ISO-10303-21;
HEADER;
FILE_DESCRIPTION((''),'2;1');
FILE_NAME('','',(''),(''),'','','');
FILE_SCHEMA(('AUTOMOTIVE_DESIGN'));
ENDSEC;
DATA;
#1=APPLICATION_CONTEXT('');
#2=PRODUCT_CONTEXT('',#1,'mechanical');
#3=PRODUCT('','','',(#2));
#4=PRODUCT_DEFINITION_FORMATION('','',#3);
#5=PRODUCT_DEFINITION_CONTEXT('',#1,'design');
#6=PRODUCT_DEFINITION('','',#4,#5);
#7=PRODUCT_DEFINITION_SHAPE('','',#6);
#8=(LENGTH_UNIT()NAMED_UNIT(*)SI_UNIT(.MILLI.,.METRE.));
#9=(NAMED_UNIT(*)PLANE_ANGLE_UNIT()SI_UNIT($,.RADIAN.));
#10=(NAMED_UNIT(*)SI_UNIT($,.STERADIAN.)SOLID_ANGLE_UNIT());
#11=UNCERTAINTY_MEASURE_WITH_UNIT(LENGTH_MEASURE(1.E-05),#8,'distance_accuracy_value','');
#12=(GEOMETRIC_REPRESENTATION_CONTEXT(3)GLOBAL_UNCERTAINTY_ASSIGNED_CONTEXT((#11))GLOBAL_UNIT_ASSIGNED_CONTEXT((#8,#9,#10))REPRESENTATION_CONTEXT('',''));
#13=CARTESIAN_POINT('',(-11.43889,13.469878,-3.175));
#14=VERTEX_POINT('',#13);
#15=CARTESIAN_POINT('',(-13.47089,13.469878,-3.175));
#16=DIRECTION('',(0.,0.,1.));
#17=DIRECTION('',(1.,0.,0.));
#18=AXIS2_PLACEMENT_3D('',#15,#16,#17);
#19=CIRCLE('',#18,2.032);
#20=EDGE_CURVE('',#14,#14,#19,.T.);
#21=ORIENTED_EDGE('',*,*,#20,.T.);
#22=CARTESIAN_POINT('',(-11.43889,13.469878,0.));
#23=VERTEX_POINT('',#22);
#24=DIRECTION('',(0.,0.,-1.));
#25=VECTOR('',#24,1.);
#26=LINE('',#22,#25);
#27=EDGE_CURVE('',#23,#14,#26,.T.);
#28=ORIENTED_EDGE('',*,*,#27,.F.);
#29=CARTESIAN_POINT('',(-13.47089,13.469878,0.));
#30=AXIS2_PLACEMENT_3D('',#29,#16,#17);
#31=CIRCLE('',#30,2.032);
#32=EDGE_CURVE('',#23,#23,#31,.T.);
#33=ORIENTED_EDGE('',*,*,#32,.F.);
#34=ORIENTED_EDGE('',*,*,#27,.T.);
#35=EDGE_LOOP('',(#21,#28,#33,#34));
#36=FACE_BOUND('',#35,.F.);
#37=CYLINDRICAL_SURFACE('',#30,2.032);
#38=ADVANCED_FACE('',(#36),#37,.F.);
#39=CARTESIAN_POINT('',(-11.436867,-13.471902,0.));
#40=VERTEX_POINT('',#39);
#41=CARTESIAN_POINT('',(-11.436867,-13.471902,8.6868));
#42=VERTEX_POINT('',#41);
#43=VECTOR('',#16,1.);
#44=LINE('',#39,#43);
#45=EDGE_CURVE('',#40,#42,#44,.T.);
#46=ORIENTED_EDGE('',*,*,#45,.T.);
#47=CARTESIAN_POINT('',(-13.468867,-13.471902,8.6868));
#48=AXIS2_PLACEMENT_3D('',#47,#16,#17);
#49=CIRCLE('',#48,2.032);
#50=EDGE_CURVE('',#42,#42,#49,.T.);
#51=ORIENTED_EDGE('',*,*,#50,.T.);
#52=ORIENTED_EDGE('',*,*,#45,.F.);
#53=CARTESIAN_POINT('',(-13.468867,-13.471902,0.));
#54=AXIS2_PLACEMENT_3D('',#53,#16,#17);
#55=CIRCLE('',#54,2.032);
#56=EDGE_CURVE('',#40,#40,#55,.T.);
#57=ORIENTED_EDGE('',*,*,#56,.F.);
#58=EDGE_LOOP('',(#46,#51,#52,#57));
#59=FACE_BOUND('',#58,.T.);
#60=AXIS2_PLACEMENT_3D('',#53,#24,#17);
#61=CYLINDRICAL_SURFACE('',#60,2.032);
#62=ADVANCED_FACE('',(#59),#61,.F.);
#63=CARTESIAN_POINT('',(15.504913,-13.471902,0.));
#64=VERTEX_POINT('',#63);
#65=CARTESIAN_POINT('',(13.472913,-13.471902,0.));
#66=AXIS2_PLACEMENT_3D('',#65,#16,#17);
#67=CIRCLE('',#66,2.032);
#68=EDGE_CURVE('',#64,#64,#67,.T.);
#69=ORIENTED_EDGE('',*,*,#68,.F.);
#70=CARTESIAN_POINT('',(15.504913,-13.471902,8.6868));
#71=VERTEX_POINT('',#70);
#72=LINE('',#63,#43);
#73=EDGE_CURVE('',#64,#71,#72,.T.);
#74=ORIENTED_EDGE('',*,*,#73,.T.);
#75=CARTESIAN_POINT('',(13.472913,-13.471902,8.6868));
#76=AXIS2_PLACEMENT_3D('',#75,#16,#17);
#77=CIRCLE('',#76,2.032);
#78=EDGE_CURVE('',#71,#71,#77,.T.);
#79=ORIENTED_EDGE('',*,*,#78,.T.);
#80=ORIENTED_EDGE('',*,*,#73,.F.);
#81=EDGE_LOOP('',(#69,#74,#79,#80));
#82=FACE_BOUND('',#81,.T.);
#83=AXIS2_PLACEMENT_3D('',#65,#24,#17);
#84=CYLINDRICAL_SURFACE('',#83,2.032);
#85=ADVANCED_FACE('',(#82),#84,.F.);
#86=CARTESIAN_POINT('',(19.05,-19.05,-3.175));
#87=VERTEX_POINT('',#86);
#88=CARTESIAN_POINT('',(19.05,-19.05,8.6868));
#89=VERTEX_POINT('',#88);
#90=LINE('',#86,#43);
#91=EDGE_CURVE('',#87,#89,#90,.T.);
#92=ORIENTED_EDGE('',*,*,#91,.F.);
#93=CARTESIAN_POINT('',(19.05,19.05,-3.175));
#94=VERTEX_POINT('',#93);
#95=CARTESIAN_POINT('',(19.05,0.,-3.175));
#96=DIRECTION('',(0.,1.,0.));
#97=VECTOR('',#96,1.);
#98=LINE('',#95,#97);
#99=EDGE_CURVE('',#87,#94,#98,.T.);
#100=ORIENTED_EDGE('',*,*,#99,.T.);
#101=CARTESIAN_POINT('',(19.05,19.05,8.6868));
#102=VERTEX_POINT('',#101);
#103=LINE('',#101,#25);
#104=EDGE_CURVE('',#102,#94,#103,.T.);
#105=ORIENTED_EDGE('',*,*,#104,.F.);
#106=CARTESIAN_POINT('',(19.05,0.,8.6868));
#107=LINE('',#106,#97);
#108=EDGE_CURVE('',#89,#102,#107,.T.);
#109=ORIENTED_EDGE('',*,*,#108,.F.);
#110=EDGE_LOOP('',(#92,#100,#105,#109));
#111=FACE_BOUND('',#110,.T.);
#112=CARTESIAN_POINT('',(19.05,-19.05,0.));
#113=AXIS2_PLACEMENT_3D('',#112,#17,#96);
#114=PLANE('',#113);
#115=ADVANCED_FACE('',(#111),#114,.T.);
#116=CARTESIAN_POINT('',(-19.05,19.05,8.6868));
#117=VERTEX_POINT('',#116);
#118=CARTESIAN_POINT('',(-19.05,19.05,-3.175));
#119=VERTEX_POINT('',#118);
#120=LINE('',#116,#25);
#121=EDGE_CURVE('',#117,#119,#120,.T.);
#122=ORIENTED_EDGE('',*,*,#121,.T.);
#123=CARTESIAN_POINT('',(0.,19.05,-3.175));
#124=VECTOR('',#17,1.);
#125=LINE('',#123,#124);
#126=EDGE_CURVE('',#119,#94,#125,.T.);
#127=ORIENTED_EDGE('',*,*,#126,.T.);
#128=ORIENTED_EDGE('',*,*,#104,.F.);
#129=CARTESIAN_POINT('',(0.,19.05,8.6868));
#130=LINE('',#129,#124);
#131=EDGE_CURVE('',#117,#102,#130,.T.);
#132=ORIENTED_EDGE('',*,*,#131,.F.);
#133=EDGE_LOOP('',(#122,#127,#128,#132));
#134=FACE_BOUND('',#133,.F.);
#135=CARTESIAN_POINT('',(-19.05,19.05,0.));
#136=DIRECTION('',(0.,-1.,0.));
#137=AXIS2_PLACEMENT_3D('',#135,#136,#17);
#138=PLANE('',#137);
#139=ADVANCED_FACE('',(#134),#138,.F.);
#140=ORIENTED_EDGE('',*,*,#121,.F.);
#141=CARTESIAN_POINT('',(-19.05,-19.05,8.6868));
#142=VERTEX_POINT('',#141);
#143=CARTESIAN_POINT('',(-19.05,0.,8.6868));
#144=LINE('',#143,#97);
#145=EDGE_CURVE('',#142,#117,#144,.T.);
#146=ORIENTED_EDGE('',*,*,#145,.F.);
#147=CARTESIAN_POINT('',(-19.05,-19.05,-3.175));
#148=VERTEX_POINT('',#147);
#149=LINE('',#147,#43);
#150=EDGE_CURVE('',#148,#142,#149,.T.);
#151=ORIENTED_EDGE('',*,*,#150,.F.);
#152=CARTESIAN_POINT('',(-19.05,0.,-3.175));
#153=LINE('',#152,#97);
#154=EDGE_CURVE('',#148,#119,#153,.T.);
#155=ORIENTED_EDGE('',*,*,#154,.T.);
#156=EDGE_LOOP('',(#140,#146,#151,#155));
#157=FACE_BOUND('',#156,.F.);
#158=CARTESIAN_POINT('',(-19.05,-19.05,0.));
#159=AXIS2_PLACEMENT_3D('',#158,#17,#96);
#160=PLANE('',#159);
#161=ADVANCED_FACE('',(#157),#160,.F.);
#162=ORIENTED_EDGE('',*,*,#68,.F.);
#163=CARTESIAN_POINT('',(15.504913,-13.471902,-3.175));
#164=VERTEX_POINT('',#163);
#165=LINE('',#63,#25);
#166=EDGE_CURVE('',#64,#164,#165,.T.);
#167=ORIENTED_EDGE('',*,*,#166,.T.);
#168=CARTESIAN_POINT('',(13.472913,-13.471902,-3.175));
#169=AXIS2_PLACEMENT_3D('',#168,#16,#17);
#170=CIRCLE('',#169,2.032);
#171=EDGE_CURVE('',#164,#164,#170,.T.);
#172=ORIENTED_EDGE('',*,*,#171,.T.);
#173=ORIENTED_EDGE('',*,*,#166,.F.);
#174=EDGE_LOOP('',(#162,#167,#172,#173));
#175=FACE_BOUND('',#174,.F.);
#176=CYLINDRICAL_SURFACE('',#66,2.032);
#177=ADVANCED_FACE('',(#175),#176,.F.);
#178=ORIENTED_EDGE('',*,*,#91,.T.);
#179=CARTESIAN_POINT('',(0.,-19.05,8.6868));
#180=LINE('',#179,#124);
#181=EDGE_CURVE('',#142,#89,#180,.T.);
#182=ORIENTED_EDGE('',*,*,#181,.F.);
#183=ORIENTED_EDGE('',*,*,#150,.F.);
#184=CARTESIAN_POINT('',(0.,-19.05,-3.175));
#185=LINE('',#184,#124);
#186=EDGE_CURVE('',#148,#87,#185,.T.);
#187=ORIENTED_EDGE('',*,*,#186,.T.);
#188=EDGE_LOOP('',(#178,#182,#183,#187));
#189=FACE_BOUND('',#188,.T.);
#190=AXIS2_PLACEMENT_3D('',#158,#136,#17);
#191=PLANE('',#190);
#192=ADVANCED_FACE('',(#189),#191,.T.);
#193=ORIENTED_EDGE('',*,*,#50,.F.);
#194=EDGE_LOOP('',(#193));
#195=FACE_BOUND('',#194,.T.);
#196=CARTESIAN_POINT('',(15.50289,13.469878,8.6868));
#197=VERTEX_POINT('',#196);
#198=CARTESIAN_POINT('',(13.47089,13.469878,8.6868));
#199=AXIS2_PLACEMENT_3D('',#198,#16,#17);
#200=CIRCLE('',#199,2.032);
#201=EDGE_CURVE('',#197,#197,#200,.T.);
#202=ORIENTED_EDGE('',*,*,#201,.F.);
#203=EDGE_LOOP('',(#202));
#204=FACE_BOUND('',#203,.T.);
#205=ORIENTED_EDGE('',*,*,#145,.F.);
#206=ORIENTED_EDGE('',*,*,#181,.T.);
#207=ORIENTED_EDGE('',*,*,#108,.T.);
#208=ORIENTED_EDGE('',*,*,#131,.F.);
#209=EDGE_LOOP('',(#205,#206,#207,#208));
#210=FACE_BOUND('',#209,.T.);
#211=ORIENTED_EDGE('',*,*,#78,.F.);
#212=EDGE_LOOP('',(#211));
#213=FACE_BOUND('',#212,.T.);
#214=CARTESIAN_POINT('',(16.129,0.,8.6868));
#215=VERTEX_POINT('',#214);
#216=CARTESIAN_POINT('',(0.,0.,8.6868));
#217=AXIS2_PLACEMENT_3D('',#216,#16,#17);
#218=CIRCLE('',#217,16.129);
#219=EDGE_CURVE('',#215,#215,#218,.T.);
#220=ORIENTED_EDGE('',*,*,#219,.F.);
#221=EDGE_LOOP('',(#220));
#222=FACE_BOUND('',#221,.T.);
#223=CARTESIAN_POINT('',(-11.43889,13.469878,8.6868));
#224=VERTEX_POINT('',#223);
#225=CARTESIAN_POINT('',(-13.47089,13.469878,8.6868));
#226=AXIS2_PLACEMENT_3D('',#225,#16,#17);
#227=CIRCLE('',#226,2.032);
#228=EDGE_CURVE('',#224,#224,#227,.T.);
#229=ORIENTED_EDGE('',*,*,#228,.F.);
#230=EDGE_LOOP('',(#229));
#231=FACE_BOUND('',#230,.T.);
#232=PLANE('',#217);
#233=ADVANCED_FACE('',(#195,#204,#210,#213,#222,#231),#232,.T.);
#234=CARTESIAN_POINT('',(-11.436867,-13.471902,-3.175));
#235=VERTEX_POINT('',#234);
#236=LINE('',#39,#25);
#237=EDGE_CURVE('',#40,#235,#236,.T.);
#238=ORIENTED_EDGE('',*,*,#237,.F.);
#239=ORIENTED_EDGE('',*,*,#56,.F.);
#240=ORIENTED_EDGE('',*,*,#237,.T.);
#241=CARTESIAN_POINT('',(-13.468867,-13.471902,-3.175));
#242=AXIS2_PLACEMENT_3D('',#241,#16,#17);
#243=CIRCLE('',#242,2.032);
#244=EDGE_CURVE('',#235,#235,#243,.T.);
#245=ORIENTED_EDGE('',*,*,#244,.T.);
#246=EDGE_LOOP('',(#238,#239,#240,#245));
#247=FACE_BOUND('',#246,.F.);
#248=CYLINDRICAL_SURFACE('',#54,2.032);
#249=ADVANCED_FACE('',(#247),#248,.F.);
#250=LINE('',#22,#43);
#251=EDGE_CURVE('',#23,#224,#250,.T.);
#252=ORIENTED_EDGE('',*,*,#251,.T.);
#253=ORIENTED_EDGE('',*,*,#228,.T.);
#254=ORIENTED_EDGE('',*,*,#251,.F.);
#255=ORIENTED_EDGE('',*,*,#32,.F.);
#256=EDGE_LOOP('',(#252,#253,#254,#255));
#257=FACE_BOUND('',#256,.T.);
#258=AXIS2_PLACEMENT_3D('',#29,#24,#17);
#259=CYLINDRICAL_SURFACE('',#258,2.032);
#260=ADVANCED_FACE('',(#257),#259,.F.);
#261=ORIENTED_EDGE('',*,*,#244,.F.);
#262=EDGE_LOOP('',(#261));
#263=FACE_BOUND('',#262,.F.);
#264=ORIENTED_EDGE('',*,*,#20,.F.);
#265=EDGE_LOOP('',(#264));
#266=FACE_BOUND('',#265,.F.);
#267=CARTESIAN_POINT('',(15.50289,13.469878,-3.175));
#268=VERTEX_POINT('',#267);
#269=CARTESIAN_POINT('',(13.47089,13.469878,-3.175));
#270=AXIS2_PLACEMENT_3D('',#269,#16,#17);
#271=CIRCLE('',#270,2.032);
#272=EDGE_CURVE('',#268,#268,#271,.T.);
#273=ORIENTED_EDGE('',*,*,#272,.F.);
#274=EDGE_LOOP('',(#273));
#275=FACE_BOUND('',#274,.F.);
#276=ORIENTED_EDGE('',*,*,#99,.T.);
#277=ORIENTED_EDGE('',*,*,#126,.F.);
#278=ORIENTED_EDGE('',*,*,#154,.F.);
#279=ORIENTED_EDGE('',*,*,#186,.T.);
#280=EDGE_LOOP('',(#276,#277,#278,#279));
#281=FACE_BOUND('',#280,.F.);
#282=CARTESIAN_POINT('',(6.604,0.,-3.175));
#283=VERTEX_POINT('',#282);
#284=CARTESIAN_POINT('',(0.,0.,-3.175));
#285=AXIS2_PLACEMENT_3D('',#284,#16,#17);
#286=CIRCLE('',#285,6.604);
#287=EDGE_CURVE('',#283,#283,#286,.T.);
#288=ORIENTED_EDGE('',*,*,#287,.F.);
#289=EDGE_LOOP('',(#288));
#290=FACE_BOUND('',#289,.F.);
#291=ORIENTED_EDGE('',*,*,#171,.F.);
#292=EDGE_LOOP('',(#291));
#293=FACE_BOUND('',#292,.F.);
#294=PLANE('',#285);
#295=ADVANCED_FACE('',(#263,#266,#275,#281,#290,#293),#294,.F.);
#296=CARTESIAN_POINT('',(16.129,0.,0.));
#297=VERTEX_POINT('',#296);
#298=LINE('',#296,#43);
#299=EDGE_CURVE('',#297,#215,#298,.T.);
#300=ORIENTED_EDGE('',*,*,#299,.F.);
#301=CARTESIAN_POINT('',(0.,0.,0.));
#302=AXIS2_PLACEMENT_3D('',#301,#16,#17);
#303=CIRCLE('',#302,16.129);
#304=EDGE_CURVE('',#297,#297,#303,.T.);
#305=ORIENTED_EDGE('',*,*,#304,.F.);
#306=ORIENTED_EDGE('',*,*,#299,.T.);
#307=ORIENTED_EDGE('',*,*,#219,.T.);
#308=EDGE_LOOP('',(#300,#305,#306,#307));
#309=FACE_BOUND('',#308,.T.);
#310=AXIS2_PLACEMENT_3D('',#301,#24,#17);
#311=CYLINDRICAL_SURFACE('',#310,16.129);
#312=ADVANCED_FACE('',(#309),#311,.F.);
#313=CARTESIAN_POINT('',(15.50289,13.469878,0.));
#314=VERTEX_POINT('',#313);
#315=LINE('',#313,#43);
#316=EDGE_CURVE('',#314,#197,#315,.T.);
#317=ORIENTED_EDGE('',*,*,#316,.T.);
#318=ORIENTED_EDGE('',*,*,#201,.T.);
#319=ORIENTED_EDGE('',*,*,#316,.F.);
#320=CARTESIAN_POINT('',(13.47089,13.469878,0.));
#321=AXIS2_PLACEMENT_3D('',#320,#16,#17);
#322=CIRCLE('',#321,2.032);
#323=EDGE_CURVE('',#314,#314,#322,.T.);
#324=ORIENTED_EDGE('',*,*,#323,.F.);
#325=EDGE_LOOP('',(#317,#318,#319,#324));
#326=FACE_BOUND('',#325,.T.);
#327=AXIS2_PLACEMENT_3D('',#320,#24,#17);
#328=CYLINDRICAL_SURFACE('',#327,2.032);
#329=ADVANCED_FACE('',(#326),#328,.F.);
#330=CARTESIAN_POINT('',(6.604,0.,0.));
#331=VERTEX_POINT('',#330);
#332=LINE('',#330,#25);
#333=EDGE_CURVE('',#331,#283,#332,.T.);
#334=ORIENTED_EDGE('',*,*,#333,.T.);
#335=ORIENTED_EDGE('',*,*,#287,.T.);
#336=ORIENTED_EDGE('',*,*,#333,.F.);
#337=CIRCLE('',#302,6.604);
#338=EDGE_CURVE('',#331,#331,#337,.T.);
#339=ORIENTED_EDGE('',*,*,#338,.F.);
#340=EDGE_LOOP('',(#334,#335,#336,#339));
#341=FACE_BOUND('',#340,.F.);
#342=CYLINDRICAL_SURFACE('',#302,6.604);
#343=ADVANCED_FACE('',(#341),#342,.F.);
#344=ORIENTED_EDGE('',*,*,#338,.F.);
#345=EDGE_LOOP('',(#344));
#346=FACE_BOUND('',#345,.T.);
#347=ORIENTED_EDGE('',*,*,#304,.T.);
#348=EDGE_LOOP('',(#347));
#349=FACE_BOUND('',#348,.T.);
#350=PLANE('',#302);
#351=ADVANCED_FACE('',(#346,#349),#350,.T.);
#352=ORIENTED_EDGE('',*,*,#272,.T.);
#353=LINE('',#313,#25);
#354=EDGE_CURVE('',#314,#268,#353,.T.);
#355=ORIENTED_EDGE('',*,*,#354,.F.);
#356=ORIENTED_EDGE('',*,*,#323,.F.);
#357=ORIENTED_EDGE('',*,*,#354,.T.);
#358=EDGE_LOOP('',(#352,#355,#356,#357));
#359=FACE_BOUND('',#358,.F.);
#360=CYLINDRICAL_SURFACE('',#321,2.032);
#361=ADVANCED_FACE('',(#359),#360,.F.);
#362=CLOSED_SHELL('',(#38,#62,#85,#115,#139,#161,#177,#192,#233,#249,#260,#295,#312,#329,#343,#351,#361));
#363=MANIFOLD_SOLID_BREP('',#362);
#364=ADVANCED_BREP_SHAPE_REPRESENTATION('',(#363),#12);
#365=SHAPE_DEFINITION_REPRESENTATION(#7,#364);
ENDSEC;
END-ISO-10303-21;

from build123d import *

# Parameters (mm, degrees)
F0_W     = 38.1
F0_H     = 38.1
F0_R     = 2.032
F0_R_2   = 16.129
F1_DEPTH = 8.6868
F2_W     = 38.1
F2_H     = 38.1
F2_R     = 6.604
F3_DEPTH = 3.175
F4_DEPTH = 3.175


# Not quite as in the source:
# - a feature of the source that left no trace in its solid (it failed there, or was rolled back) is left out


with BuildPart() as f1:
    # F0 (on Top) → F1 (new body)
    with BuildSketch(Plane.XY):
        Rectangle(F0_W, F0_H)
        with Locations((-13.4688665365, -13.4719016558)):
            Circle(F0_R, mode=Mode.SUBTRACT)
        with Locations((13.4729134635, -13.4719016558)):
            Circle(F0_R, mode=Mode.SUBTRACT)
        with Locations((-13.47089, 13.4698783442)):
            Circle(F0_R, mode=Mode.SUBTRACT)
        Circle(F0_R_2, mode=Mode.SUBTRACT)
        with Locations((13.47089, 13.4698783442)):
            Circle(F0_R, mode=Mode.SUBTRACT)
    extrude(amount=F1_DEPTH)

    # F2 (on Top) → F3 (join)
    with BuildSketch(Plane.XY):
        Rectangle(F2_W, F2_H)
        Circle(F2_R, mode=Mode.SUBTRACT)
    extrude(amount=-F3_DEPTH)

    # F4 (cut, through all): faces of the model
    f4_faces = [f1.faces().sort_by_distance(p)[0] for p in [
        (-13.47089, 13.4698783442, 0),
        (-13.4688665365, -13.4719016558, 0),
        (13.4729134635, -13.4719016558, 0),
        (13.47089, 13.4698783442, 0),
    ]]
    extrude(f4_faces, amount=-F4_DEPTH, mode=Mode.SUBTRACT)


solid = f1.part
